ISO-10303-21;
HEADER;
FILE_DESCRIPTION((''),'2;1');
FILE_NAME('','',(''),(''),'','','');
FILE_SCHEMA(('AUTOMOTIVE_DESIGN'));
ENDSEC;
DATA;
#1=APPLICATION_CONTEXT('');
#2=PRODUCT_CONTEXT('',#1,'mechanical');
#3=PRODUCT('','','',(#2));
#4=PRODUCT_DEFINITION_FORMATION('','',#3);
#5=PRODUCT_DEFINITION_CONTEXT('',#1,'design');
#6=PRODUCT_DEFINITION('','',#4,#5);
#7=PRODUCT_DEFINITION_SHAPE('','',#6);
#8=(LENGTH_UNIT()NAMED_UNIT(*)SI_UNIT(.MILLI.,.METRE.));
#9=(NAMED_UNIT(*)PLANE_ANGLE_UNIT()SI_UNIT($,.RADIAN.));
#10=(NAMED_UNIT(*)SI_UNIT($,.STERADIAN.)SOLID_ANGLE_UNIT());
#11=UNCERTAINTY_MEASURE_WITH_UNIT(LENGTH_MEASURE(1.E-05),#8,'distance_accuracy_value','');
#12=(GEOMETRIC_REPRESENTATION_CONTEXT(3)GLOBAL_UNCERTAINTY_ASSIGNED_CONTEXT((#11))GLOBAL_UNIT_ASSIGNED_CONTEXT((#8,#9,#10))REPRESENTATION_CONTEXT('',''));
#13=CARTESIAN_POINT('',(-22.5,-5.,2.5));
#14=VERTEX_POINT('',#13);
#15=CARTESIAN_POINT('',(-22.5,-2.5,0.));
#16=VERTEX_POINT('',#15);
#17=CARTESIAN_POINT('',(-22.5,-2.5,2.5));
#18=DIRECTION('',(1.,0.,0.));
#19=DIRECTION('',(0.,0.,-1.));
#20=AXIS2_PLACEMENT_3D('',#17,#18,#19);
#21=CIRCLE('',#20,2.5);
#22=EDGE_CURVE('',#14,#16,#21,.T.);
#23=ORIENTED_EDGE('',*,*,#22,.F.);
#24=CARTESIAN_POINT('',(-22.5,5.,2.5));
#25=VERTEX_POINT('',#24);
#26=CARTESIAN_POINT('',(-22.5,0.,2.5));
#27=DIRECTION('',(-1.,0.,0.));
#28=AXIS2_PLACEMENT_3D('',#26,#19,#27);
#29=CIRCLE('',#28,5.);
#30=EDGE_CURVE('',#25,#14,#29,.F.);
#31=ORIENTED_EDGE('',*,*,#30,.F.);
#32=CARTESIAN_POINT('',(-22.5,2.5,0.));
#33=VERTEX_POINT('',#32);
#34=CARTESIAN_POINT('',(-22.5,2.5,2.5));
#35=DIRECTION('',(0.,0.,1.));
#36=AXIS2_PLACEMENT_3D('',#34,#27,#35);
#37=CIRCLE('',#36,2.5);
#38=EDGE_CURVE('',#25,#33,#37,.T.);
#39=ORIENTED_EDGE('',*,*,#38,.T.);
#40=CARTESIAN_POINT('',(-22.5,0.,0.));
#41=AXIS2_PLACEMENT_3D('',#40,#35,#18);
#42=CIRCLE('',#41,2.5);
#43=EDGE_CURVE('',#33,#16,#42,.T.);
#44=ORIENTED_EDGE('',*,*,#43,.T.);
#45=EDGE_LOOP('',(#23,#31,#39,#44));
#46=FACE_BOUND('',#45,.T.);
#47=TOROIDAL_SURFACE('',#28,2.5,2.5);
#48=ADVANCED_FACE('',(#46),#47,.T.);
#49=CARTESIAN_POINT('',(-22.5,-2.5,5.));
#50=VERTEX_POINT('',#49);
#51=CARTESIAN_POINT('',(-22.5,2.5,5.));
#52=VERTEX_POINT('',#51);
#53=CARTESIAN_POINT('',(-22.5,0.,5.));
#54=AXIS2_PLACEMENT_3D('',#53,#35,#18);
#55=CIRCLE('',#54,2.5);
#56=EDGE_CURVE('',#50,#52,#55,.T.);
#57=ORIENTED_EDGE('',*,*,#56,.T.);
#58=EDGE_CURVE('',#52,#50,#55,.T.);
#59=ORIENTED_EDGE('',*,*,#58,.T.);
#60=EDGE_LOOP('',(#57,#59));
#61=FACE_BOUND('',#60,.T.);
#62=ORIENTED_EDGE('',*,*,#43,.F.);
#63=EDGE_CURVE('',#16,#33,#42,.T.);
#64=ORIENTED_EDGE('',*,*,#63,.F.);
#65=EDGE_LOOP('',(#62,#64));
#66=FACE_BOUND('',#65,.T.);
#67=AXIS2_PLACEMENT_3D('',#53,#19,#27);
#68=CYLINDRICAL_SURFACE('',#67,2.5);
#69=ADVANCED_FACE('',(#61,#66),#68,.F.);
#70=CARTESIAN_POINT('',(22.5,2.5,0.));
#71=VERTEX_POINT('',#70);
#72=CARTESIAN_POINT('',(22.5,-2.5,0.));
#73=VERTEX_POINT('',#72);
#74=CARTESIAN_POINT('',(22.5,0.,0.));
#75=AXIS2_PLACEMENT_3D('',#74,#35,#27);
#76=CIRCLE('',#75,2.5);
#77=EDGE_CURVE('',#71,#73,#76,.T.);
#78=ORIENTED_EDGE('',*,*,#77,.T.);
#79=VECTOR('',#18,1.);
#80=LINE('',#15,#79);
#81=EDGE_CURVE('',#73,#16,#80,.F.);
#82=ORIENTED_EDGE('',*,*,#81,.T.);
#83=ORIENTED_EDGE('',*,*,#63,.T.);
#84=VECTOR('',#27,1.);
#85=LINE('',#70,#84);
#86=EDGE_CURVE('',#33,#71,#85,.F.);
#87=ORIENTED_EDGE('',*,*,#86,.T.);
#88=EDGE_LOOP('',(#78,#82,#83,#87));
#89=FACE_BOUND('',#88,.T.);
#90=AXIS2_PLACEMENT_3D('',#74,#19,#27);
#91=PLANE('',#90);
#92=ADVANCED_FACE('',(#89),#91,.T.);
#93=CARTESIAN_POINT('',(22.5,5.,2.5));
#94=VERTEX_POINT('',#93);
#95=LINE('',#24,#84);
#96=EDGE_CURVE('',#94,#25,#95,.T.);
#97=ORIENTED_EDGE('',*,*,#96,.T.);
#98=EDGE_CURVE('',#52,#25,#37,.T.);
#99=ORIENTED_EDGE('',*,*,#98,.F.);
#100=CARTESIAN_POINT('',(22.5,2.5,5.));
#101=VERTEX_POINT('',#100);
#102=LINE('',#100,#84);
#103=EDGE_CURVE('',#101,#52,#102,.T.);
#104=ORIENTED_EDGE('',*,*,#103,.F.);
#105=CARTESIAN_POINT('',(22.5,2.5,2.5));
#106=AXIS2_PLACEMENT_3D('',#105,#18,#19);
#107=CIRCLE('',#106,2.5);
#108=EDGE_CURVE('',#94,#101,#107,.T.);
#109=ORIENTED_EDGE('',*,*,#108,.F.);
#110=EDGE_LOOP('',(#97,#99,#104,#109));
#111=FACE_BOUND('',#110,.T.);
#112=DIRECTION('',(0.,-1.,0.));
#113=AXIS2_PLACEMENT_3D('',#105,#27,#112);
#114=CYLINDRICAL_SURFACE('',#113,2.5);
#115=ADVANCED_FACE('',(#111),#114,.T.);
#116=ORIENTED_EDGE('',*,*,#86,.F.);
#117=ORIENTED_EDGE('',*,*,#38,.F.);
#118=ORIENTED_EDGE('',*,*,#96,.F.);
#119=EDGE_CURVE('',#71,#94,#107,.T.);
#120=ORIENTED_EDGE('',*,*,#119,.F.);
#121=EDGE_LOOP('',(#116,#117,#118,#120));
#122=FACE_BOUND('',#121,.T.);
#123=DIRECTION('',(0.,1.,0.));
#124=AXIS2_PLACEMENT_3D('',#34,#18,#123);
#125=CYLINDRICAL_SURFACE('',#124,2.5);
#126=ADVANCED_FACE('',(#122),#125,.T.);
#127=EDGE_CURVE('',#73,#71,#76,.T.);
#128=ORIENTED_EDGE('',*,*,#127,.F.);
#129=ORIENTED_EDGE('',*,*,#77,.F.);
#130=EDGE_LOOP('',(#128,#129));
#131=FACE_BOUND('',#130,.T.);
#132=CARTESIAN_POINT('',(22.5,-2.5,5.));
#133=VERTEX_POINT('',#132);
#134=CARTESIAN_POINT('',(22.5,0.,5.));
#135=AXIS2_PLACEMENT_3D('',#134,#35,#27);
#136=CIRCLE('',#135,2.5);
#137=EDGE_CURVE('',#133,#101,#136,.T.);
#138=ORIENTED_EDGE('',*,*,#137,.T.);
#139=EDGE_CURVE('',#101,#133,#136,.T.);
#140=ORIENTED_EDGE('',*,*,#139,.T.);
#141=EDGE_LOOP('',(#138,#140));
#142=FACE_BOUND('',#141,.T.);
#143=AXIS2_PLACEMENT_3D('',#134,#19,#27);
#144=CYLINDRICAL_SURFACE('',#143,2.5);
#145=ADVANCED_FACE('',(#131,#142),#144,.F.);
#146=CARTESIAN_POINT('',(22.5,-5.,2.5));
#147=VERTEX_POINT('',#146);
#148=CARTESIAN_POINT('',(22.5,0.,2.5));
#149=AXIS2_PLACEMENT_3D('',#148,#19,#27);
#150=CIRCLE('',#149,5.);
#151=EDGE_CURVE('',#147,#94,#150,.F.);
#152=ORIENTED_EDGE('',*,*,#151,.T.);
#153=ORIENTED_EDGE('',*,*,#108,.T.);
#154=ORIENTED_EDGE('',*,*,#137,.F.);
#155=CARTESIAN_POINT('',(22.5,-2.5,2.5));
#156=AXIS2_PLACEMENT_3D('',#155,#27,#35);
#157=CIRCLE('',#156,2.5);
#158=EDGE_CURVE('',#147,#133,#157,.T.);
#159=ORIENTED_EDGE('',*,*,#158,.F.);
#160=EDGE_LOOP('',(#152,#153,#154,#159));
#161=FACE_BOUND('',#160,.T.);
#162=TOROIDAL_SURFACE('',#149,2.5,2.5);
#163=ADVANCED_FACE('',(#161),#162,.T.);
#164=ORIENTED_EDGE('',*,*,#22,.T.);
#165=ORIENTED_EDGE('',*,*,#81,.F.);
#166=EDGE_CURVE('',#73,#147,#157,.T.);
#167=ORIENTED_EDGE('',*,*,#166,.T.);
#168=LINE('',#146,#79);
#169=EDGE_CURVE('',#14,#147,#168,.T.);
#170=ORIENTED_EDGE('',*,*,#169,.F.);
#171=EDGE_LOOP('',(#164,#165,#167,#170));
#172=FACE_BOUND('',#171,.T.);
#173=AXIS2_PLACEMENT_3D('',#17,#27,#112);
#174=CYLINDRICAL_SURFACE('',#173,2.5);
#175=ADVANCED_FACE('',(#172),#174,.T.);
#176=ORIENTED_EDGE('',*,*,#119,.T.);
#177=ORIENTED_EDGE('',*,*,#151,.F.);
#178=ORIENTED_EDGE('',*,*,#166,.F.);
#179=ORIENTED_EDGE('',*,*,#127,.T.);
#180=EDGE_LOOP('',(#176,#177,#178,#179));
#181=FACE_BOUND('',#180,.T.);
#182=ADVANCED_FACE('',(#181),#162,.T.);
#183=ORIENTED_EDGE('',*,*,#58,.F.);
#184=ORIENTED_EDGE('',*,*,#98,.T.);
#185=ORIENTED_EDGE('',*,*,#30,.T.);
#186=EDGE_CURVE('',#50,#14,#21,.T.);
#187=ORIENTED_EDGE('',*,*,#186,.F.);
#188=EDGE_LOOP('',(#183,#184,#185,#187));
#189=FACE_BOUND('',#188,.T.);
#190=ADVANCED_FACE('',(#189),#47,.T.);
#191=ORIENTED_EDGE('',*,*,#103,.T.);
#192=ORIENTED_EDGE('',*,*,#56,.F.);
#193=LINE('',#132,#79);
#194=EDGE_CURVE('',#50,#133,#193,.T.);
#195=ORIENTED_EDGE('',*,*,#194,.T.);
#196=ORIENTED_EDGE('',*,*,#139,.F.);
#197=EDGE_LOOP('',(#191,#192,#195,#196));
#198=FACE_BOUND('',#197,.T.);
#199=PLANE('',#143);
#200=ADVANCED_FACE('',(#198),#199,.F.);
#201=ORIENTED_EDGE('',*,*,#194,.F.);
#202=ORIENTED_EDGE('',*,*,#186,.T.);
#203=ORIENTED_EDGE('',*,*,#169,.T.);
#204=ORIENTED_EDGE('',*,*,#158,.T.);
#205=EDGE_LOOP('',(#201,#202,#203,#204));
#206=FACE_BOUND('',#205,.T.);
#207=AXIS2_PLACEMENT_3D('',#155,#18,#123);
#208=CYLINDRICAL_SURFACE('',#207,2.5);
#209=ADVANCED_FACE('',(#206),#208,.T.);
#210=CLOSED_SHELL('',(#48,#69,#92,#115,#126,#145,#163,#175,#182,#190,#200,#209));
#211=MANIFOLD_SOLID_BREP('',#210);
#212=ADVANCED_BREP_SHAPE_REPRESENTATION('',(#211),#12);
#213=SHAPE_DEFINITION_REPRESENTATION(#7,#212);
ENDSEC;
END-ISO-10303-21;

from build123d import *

# Parameters (mm, degrees)
SKETCH2_R           = 2.5
BOSS_EXTRUDE1_DEPTH = 5
FILLET1_R           = 2.5


with BuildPart() as part:
    # Sketch2 → Boss-Extrude1 (new body)
    with BuildSketch(Plane.XY):
        with BuildLine():
            Line((-22.5, 5), (22.5, 5))
            ThreePointArc((22.5, 5), (27.5, 0), (22.5, -5))
            Line((22.5, -5), (-22.5, -5))
            ThreePointArc((-22.5, -5), (-27.5, 0), (-22.5, 5))
        make_face()
        with Locations((-22.5, 0)):
            Circle(SKETCH2_R, mode=Mode.SUBTRACT)
        with Locations(Location((22.5, 0, 0), (0, 0, 180))):
            Circle(SKETCH2_R, mode=Mode.SUBTRACT)
    extrude(amount=BOSS_EXTRUDE1_DEPTH)

    # Fillet1
    fillet1_edges = [part.edges().sort_by_distance(p)[0] for p in [
        (0, -5, 5),
        (0, -5, 0),
        (27.5, 0, 5),
        (27.5, 0, 0),
        (-27.5, 0, 5),
        (-27.5, 0, 0),
        (0, 5, 5),
        (0, 5, 0),
    ]]
    fillet(fillet1_edges, radius=FILLET1_R - 0.0001)  # a hair under: the kernel refuses the full size


solid = part.part
